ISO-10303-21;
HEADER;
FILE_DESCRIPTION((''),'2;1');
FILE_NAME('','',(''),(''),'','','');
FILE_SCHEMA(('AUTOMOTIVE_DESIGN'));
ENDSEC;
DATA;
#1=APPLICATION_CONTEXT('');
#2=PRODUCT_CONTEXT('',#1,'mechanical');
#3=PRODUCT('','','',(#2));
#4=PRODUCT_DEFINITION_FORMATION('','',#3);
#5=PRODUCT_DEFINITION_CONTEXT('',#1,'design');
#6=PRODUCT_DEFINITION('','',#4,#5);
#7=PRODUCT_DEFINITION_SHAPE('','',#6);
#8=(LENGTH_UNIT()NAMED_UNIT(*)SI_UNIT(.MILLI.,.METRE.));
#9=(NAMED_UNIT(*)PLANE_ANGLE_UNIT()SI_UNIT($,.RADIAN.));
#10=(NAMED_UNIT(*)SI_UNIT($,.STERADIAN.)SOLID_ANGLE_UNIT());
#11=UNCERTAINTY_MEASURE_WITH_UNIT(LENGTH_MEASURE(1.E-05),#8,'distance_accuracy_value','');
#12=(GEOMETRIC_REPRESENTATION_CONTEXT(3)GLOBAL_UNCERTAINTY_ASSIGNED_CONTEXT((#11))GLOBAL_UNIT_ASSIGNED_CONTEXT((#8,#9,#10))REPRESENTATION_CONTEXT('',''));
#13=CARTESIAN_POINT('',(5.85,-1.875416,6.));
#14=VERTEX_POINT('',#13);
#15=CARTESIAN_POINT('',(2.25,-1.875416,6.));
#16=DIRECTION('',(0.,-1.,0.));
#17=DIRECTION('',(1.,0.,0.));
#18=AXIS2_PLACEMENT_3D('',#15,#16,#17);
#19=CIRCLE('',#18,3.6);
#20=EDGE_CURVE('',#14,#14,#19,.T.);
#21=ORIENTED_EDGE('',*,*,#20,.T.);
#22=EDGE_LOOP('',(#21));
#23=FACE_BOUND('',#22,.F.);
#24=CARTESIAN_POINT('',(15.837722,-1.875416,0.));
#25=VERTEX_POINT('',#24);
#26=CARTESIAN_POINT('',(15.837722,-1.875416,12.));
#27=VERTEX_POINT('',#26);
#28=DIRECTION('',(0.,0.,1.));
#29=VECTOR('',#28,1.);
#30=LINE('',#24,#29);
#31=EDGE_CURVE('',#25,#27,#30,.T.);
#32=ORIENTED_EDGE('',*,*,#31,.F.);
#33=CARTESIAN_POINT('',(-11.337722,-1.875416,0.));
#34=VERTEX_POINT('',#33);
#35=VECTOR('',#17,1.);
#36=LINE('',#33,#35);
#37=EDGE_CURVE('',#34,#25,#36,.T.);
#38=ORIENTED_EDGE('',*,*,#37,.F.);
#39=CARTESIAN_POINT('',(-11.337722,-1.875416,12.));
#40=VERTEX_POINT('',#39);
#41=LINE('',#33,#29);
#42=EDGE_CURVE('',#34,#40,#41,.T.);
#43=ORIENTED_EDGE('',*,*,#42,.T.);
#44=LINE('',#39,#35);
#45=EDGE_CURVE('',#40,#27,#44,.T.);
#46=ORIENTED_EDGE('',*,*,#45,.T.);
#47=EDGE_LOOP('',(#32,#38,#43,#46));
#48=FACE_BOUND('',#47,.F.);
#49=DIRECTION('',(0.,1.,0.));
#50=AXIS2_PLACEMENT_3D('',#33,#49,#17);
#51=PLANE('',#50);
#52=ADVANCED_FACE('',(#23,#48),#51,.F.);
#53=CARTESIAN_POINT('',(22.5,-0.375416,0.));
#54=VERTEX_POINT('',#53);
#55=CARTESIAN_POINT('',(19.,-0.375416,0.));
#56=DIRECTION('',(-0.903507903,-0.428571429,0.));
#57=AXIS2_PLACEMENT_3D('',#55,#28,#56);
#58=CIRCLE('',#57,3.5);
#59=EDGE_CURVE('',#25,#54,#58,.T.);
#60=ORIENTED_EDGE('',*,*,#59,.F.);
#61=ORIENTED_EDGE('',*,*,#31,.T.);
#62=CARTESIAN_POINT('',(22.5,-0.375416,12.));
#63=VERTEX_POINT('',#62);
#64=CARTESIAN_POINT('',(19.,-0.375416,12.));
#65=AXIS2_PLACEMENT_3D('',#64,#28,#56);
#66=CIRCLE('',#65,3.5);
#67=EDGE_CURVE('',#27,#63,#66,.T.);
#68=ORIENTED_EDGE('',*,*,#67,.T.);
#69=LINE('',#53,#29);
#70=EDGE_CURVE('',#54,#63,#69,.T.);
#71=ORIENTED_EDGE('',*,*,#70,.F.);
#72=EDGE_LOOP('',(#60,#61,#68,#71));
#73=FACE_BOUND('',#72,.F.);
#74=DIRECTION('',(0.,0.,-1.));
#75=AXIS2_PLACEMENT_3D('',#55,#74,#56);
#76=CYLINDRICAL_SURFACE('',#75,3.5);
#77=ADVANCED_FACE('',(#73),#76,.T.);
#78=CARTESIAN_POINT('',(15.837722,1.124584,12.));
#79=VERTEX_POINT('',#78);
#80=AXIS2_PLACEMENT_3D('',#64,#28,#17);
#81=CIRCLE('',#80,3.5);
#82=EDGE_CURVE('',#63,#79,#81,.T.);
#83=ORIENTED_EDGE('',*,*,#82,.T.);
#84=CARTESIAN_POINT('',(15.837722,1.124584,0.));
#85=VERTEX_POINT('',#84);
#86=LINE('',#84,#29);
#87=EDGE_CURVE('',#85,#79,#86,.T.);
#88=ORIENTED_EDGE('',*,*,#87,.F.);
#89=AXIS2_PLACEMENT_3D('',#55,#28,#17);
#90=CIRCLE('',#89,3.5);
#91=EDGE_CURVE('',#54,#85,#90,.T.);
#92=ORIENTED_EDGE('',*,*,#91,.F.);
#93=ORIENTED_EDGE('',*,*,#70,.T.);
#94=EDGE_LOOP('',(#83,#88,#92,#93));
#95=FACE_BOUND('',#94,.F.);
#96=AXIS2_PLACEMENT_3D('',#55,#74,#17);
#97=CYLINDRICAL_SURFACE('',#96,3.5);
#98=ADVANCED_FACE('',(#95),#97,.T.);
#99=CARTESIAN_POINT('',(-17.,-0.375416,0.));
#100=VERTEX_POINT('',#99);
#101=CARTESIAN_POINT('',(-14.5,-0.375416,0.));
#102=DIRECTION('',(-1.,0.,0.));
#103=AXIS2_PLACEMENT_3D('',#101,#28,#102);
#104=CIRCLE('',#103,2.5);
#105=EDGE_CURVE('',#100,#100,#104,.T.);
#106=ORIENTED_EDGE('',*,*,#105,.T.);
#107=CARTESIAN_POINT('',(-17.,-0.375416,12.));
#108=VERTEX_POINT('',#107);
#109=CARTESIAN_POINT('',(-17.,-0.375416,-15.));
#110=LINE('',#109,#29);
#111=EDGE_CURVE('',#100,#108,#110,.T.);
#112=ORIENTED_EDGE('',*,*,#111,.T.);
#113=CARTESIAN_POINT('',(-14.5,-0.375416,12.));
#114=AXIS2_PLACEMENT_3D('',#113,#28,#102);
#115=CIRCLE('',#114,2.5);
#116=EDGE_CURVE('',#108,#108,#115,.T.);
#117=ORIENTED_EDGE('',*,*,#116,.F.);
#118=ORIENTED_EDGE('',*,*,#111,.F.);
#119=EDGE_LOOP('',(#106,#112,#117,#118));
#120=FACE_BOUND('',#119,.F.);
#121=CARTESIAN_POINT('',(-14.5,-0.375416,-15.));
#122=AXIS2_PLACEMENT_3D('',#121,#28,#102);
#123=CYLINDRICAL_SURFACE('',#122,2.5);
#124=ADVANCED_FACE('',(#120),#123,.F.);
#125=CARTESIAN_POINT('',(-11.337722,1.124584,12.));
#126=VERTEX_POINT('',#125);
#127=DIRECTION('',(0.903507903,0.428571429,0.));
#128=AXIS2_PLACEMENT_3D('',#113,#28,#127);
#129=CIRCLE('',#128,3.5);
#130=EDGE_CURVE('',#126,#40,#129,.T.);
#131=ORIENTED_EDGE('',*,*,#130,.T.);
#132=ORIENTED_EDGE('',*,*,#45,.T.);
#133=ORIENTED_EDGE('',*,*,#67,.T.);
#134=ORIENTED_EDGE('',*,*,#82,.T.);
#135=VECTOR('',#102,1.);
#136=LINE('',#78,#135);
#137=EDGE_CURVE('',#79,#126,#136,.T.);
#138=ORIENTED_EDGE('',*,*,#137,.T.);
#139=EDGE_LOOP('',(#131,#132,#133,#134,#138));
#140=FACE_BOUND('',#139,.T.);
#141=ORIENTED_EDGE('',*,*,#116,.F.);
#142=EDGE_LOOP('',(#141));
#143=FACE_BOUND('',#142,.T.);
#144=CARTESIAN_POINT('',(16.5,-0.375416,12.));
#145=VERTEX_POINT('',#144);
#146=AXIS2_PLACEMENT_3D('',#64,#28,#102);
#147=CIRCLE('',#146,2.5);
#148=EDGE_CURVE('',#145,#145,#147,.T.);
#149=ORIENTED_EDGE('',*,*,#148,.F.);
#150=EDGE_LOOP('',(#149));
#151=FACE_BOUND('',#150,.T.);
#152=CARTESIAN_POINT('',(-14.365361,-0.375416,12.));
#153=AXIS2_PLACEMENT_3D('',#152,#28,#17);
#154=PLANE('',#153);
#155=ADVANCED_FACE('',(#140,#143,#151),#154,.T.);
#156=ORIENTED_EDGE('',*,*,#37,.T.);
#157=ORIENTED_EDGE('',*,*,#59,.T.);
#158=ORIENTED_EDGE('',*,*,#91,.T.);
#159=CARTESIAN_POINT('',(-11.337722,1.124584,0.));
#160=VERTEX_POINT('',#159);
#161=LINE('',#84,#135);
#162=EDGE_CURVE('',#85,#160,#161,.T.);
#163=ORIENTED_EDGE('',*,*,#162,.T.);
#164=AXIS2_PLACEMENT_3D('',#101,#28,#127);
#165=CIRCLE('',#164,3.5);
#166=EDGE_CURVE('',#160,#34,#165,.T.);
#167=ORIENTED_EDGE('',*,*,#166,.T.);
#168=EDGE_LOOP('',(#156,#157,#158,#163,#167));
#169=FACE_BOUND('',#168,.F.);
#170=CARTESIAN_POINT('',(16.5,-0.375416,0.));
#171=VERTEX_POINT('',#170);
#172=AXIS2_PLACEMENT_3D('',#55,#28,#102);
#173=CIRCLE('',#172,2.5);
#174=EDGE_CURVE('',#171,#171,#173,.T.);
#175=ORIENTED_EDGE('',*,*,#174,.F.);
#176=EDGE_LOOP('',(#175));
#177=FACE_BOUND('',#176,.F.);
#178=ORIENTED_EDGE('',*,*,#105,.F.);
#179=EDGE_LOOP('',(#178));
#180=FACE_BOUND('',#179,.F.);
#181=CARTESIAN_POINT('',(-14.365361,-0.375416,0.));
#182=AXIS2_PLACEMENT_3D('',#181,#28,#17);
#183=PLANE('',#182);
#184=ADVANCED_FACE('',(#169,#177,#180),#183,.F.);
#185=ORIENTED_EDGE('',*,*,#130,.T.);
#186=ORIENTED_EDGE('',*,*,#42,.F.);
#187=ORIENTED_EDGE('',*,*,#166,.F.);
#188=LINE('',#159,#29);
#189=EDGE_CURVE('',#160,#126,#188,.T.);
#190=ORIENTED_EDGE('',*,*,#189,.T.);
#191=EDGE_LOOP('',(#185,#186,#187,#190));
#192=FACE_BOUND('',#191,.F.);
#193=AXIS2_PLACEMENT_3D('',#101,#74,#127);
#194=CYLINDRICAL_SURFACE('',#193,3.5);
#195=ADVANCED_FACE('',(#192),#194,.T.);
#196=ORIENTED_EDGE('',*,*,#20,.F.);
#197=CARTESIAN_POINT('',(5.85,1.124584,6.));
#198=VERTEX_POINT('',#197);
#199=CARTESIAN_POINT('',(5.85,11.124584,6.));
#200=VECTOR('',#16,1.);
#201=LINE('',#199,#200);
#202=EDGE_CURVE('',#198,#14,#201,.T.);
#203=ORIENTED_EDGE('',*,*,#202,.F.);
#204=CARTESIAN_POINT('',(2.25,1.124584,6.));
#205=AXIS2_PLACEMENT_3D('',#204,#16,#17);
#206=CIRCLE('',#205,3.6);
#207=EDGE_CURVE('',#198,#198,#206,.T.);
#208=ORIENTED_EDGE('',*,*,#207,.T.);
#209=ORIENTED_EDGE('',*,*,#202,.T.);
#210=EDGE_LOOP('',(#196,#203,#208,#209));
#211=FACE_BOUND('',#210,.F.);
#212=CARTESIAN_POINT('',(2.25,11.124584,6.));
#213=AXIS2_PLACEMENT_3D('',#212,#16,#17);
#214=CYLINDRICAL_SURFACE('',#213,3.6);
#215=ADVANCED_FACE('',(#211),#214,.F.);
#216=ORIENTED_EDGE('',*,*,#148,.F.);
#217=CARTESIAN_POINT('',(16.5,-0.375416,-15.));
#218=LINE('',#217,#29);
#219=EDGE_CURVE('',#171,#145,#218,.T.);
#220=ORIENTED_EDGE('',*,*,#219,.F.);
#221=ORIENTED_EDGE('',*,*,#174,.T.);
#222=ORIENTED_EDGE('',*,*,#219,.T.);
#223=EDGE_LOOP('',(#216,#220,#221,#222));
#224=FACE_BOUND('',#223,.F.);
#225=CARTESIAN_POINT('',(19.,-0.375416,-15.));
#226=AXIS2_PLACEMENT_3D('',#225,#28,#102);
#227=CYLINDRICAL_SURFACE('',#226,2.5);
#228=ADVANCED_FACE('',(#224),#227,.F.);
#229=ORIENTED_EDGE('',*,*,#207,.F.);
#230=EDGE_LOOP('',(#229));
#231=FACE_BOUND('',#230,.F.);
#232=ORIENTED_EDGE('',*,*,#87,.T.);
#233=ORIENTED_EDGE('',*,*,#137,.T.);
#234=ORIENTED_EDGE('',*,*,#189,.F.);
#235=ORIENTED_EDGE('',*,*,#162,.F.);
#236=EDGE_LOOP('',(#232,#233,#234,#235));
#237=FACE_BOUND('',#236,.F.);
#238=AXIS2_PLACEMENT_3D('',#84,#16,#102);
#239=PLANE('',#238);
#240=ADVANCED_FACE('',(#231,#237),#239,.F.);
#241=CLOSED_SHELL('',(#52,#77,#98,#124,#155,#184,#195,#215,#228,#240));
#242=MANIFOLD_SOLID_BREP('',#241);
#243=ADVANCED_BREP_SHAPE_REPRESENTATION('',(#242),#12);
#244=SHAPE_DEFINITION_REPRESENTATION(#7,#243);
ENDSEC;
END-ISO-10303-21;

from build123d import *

# Parameters (mm, degrees)
F1_DEPTH = 12
F2_D     = 5
F2_DEPTH = 15
F2_TIP   = 1.5021515476
F3_D     = 5
F3_DEPTH = 15
F3_TIP   = 1.5021515476
F5_D     = 7.2
F5_DEPTH = 10
F5_TIP   = 2.1630982285


# Not quite as in the source:
# - a feature names something its author has since deleted; it is built from what else it names


with BuildPart() as f1:
    # F0 (on Top) → F1 (new body)
    with BuildSketch(Plane.XY):
        with BuildLine():
            Line((-14.5, -1.8754155822), (-14.5, 1.1245844178))
            Line((-14.5, 1.1245844178), (-11.3377223398, 1.1245844178))
            ThreePointArc((-11.3377223398, 1.1245844178), (-18, -0.3754155822), (-11.3377223398, -1.8754155822))
            Line((-11.3377223398, -1.8754155822), (-14.5, -1.8754155822))
        make_face()
        with BuildLine():
            Line((-11.3377223398, 1.1245844178), (-14.5, 1.1245844178))
            Line((-14.5, 1.1245844178), (-14.5, -1.8754155822))
            Line((-14.5, -1.8754155822), (-11.3377223398, -1.8754155822))
            ThreePointArc((-11.3377223398, -1.8754155822), (-11.0854742781, -1.144189993), (-11, -0.3754155822))
            ThreePointArc((-11, -0.3754155822), (-11.0854742781, 0.3933588286), (-11.3377223398, 1.1245844178))
        make_face()
        with BuildLine():
            Line((15.8377223398, 1.1245844178), (-11.3377223398, 1.1245844178))
            ThreePointArc((-11.3377223398, 1.1245844178), (-11.0854742781, 0.3933588286), (-11, -0.3754155822))
            ThreePointArc((-11, -0.3754155822), (-11.0854742781, -1.144189993), (-11.3377223398, -1.8754155822))
            Line((-11.3377223398, -1.8754155822), (15.8377223398, -1.8754155822))
            ThreePointArc((15.8377223398, -1.8754155822), (15.5, -0.3754155822), (15.8377223398, 1.1245844178))
        make_face()
        with BuildLine():
            ThreePointArc((22.5, -0.3754155822), (19.7687744108, 3.0391101397), (15.8377223398, 1.1245844178))
            Line((15.8377223398, 1.1245844178), (19, 1.1245844178))
            Line((19, 1.1245844178), (19, -1.8754155822))
            Line((19, -1.8754155822), (15.8377223398, -1.8754155822))
            ThreePointArc((15.8377223398, -1.8754155822), (19.7687744108, -3.7899413041), (22.5, -0.3754155822))
        make_face()
        with BuildLine():
            Line((19, 1.1245844178), (15.8377223398, 1.1245844178))
            ThreePointArc((15.8377223398, 1.1245844178), (15.5, -0.3754155822), (15.8377223398, -1.8754155822))
            Line((15.8377223398, -1.8754155822), (19, -1.8754155822))
            Line((19, -1.8754155822), (19, 1.1245844178))
        make_face()
    extrude(amount=F1_DEPTH)

    # F2
    with Locations(Plane(origin=(0, 0, 0), x_dir=(1, 0, 0), z_dir=(0, 0, -1))):
        with Locations((19, 0.3754155822)):
            Hole(F2_D / 2, depth=F2_DEPTH)
            with Locations((0, 0, -(F2_DEPTH + F2_TIP / 2))):  # 118° drill point
                Cone(0, F2_D / 2, F2_TIP, mode=Mode.SUBTRACT)

    # F3
    with Locations(Plane(origin=(0, 0, 0), x_dir=(1, 0, 0), z_dir=(0, 0, -1))):
        with Locations((-14.5, 0.3754155822)):
            Hole(F3_D / 2, depth=F3_DEPTH)
            with Locations((0, 0, -(F3_DEPTH + F3_TIP / 2))):  # 118° drill point
                Cone(0, F3_D / 2, F3_TIP, mode=Mode.SUBTRACT)

    # F5
    with Locations(Plane(origin=(0, 1.1245844178, 0), x_dir=(-1, 0, 0), z_dir=(0, 1, 0))):
        with Locations((-2.25, 6)):
            Hole(F5_D / 2, depth=F5_DEPTH)
            with Locations((0, 0, -(F5_DEPTH + F5_TIP / 2))):  # 118° drill point
                Cone(0, F5_D / 2, F5_TIP, mode=Mode.SUBTRACT)


solid = f1.part
